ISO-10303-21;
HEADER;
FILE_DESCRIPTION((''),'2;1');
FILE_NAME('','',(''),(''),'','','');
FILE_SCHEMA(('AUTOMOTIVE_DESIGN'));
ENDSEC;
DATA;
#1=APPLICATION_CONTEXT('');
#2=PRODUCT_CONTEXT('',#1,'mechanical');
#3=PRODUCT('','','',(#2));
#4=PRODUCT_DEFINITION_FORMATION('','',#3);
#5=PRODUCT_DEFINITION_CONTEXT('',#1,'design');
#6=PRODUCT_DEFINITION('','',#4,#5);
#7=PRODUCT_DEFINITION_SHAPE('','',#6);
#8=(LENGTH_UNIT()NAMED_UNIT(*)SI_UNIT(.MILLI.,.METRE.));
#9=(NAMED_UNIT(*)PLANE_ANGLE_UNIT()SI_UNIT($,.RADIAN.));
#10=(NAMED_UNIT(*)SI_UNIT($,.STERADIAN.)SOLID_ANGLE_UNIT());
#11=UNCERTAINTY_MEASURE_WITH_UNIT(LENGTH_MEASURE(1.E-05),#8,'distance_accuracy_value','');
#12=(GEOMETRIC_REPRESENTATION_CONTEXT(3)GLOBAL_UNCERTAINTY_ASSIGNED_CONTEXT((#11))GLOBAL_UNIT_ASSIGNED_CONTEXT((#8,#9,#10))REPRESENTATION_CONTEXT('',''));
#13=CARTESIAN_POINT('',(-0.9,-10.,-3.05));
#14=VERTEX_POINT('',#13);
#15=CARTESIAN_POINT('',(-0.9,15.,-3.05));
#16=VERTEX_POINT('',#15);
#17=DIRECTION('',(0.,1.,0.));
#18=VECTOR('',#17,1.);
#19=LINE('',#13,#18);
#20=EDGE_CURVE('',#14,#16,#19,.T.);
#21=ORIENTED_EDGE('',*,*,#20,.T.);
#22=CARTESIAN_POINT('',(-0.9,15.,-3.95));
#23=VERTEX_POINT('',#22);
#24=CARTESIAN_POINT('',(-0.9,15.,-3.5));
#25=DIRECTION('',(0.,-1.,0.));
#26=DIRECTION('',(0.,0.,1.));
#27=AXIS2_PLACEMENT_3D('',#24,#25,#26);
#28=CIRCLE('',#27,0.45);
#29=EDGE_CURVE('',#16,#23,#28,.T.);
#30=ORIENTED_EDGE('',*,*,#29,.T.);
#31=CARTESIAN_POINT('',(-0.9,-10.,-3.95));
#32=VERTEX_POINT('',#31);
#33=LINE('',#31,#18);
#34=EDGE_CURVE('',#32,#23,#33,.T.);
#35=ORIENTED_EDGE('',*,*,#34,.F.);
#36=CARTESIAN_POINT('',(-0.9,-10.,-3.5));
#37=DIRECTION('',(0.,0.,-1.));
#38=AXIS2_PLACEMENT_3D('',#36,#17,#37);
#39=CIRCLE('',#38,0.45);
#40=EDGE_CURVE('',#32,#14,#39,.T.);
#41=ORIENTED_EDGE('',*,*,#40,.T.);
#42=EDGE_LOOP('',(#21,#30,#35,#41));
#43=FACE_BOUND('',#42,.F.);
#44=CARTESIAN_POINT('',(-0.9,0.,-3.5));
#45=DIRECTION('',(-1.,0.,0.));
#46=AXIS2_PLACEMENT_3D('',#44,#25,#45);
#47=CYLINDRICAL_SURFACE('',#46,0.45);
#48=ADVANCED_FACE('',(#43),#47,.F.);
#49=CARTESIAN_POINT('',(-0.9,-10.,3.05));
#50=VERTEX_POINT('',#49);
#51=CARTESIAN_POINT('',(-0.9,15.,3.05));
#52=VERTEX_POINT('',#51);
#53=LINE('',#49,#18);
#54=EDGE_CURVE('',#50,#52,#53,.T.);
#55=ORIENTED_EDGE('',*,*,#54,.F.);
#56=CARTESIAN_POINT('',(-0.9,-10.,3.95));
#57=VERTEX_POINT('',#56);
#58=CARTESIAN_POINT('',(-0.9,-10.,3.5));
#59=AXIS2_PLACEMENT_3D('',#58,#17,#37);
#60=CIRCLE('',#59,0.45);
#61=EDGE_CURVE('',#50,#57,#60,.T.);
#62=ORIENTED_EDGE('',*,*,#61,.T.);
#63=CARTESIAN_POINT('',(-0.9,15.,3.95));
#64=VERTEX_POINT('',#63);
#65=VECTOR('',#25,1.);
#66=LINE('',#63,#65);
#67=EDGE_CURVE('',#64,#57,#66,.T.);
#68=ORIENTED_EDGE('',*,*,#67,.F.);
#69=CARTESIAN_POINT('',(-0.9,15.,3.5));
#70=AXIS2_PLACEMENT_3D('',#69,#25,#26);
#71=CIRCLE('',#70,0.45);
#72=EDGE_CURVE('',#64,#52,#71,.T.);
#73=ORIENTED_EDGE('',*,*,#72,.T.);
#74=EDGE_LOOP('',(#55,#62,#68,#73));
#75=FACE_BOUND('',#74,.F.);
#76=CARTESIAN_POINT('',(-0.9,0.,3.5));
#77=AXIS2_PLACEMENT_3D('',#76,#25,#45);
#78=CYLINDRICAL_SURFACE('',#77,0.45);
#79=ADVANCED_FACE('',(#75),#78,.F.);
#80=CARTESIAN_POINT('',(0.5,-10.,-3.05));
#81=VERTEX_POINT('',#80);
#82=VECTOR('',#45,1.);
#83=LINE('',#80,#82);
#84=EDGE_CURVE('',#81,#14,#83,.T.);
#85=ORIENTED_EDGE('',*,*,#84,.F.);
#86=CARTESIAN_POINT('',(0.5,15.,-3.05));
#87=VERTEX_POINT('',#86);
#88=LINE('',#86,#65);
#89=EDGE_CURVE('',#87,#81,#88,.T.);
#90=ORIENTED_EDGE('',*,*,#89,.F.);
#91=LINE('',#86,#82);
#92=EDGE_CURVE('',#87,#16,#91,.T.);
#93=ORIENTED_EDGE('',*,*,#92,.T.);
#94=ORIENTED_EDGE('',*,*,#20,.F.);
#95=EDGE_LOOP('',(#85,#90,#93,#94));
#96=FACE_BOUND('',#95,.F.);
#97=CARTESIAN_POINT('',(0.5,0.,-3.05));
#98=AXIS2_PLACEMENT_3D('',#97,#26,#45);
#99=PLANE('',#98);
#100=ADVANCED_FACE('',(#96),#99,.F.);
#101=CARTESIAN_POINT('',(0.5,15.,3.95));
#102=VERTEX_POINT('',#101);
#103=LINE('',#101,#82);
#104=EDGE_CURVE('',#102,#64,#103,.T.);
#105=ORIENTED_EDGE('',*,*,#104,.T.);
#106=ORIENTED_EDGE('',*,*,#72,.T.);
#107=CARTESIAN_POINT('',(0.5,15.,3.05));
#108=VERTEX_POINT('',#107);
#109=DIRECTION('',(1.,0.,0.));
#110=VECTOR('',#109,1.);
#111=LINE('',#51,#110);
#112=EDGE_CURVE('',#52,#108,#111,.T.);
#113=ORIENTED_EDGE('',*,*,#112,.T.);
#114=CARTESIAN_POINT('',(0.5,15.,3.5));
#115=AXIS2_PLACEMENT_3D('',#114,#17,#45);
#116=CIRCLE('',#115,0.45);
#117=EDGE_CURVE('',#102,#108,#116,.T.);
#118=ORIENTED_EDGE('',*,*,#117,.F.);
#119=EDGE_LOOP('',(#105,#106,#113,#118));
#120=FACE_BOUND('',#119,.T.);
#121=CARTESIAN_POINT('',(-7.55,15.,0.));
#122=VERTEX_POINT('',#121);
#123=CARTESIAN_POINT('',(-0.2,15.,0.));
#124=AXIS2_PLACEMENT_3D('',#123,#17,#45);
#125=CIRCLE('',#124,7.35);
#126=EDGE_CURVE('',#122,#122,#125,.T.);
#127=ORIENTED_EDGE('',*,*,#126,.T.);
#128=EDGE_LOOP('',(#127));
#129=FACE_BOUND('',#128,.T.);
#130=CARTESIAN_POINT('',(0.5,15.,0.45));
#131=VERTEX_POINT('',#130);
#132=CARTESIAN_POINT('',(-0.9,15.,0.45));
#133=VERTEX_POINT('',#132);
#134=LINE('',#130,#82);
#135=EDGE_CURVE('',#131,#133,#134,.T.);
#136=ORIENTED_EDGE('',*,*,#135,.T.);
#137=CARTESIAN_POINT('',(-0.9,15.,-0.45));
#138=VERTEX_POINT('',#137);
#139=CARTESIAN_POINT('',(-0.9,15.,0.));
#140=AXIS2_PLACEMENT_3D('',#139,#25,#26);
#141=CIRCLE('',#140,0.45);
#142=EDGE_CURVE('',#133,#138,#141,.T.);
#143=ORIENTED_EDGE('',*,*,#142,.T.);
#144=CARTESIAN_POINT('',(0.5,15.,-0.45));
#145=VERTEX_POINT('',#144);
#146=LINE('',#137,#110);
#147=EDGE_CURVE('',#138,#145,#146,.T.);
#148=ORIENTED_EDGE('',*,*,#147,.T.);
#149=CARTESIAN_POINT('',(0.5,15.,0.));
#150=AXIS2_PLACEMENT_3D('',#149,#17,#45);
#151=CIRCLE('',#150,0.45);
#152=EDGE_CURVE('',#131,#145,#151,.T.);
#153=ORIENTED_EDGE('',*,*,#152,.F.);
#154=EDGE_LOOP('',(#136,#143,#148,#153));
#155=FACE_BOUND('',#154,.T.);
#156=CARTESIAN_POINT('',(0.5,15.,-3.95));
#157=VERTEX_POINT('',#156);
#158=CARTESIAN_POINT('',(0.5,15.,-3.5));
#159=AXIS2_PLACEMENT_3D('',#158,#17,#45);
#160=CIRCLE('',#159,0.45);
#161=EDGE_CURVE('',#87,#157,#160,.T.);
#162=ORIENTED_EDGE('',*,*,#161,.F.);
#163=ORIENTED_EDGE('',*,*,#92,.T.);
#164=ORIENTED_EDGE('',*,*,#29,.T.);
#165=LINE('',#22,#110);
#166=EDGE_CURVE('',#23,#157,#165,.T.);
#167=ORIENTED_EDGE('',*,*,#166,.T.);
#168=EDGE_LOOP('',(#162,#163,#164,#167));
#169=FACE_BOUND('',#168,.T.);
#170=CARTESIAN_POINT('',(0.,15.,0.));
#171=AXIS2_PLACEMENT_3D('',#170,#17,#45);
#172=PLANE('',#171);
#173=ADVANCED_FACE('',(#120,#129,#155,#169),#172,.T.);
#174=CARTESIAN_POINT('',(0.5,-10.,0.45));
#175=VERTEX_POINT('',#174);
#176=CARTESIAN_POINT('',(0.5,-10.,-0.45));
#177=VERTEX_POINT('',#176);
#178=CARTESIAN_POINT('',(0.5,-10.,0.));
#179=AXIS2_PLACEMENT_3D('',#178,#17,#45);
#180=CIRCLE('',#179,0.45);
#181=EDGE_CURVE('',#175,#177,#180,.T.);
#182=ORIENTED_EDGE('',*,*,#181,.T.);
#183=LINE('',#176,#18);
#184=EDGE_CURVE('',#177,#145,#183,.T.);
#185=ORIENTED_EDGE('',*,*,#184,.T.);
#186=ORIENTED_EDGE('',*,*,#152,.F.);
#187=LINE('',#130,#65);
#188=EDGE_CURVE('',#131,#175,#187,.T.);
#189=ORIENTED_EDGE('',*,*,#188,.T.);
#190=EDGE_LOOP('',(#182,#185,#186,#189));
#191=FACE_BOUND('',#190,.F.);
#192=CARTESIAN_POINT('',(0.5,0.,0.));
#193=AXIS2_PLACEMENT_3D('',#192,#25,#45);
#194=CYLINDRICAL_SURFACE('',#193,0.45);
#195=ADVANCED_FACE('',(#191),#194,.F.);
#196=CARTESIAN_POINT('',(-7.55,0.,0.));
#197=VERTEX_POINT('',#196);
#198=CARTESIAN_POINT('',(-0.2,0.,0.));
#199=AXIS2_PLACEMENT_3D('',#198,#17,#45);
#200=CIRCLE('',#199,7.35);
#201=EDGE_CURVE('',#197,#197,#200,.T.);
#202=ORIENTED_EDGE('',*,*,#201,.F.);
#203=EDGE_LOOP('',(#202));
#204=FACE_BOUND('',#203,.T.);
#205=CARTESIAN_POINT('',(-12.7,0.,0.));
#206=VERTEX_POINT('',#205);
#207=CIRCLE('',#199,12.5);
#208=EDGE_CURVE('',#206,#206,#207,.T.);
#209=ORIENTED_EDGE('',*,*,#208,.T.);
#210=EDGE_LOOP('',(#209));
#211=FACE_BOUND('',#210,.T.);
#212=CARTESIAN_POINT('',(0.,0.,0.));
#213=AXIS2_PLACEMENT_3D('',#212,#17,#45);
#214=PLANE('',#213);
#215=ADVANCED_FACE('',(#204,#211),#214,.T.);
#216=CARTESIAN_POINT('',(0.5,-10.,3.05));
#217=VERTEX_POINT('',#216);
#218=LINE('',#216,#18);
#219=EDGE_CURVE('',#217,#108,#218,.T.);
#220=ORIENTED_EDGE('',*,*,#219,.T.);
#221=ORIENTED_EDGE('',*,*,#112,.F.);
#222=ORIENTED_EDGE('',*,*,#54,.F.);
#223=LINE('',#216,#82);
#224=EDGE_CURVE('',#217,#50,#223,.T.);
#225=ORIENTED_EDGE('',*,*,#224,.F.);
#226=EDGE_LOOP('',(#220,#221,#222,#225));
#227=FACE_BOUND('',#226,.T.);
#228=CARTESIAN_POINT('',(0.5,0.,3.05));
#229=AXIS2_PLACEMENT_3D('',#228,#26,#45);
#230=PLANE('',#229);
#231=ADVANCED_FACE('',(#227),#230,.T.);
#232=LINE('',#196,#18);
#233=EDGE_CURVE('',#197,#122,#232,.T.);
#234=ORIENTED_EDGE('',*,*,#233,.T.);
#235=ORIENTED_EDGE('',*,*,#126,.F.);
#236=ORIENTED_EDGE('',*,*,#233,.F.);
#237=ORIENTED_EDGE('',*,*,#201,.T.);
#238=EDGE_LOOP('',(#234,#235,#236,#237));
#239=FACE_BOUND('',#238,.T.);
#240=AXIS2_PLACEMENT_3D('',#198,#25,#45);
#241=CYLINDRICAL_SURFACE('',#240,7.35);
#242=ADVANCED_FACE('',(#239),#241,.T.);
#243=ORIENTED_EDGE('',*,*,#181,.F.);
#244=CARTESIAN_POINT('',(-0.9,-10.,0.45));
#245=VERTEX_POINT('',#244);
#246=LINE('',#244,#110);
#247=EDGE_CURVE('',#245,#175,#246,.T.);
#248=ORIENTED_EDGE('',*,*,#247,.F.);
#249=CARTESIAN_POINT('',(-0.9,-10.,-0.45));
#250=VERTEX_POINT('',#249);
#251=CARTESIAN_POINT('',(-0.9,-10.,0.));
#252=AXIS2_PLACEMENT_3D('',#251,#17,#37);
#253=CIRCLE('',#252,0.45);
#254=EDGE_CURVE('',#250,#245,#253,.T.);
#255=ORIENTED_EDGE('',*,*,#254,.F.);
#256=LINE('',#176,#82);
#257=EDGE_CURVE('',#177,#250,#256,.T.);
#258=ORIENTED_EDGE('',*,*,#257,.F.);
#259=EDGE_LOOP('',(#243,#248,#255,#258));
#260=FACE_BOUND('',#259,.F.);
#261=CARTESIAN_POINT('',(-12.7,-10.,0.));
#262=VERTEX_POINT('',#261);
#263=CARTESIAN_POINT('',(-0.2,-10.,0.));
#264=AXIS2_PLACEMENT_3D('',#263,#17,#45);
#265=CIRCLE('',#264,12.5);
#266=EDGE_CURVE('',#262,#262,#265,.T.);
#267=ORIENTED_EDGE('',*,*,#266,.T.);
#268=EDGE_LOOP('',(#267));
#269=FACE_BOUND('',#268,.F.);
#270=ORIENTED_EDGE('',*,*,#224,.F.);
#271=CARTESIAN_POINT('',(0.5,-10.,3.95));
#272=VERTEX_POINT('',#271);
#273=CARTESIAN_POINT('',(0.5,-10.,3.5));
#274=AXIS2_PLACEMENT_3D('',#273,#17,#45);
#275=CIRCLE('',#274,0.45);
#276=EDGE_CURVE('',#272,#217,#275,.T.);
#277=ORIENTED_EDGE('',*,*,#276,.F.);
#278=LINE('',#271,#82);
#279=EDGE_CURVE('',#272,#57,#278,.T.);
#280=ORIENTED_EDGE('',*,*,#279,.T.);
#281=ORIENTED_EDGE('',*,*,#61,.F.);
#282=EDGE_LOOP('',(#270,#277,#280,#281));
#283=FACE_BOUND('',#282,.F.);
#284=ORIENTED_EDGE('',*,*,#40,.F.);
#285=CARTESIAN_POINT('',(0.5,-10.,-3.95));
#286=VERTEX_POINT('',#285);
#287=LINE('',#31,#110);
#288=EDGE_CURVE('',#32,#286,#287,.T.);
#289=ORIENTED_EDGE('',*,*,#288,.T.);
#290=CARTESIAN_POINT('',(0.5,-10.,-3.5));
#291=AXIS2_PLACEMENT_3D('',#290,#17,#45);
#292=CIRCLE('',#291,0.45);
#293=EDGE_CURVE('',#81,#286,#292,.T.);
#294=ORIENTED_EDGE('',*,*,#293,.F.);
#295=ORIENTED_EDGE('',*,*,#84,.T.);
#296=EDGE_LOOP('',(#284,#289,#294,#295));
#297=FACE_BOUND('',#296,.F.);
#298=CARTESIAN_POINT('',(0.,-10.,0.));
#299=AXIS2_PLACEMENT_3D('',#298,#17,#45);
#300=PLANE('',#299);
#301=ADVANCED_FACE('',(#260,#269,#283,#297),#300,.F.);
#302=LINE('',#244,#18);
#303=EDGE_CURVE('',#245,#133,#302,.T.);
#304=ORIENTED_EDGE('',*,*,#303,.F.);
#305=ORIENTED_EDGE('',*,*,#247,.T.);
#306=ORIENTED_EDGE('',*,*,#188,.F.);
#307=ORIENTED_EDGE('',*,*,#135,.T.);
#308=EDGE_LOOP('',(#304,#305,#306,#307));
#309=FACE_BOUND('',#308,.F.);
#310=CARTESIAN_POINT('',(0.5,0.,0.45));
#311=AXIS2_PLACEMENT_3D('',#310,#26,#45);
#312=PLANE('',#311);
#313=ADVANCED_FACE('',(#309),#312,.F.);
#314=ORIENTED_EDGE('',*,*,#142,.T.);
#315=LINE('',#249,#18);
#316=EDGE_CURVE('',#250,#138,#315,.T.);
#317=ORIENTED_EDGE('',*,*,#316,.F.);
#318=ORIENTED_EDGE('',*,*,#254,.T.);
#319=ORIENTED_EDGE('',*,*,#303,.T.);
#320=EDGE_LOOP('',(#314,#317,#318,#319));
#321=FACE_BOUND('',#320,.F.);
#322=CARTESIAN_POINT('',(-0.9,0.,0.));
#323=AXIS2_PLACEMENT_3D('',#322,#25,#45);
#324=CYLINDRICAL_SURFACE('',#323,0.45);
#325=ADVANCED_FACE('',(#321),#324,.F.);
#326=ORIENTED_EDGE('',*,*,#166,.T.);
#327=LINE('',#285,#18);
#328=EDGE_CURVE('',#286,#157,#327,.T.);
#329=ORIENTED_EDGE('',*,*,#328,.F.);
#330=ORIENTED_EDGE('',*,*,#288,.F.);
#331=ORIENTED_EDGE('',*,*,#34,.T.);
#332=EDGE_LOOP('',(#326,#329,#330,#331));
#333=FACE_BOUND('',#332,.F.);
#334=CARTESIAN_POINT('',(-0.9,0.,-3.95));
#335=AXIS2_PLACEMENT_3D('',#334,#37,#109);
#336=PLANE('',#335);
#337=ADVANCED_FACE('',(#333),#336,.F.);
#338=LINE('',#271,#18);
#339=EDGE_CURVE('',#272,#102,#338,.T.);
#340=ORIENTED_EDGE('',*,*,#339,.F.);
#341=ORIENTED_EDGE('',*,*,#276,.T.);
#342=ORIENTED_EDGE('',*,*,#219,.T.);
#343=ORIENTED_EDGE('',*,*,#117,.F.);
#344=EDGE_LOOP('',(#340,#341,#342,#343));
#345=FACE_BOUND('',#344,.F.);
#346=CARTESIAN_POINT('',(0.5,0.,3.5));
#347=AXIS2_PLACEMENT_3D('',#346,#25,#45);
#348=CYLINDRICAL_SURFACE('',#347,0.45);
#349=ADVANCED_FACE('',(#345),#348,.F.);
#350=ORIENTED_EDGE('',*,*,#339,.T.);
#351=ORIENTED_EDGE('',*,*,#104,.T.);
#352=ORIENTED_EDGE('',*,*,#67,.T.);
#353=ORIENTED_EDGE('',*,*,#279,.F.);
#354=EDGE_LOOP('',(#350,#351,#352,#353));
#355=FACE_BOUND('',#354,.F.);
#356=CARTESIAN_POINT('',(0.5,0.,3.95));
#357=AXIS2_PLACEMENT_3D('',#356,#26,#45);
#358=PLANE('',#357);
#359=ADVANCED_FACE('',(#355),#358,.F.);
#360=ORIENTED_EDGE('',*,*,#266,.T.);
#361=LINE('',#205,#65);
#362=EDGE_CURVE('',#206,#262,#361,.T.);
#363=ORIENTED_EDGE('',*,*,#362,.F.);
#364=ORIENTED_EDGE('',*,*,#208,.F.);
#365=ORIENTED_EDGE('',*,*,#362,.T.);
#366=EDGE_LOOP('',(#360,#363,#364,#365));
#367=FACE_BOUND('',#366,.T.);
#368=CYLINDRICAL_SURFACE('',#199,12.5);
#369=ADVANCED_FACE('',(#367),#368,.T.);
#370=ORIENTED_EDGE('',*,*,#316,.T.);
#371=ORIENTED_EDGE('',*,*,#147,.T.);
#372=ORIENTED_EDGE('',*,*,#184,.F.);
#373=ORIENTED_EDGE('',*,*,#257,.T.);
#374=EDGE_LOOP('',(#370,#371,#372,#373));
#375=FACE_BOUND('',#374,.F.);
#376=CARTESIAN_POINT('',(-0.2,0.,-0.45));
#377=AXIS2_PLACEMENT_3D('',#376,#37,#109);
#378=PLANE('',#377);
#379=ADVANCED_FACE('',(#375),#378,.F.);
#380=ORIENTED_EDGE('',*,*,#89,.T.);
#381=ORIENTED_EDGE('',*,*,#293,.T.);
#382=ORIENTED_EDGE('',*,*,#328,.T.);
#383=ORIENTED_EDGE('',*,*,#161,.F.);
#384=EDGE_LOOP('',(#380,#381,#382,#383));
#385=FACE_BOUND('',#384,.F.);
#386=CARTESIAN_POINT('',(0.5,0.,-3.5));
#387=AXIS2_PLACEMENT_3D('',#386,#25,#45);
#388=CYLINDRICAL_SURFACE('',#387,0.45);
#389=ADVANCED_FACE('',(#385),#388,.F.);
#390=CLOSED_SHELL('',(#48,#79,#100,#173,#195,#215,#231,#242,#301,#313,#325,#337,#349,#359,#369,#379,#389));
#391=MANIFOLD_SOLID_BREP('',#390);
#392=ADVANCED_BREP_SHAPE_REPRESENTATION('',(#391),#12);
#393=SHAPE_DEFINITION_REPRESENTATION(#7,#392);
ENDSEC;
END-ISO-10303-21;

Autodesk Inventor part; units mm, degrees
ref_plane "YZ Plane" through (0, 0, 0) normal (1, 0, 0) x (0, 1, 0)
ref_plane "XZ Plane" through (0, 0, 0) normal (0, 1, 0) x (-1, 0, 0)
ref_plane "XY Plane" through (0, 0, 0) normal (0, 0, 1) x (1, 0, 0)
sketch "Sketch1" plane through (0, 0, 0) normal (0, 1, 0) x (-1, 0, 0)
  circle A0 centre (0.2, 0) radius 7.35
  circle A1 centre (0.2, 0) radius 12.5
  line L0 (0.2, 0) -> (0.2, -3.5)
  line L1 (0.2, 0) -> (0.2, 3.5)
  line L2 (0.2, 3.5) -> (-0.5, 3.5)
  line L3 (-0.5, 3.5) -> (0.9, 3.5)
  line L4 (0.2, 0) -> (-0.5, 0)
  line L5 (-0.5, 0) -> (0.9, 0)
  line L6 (0.2, -3.5) -> (-0.5, -3.5)
  line L7 (-0.5, -3.5) -> (0.9, -3.5)
  circle A2 centre (-0.5, -3.5) radius 0.45
  circle A3 centre (0.9, -3.5) radius 0.45
  circle A4 centre (-0.5, 0) radius 0.45
  circle A5 centre (0.9, 0) radius 0.45
  circle A6 centre (-0.5, 3.5) radius 0.45
  circle A7 centre (0.9, 3.5) radius 0.45
  line L8 (0.9, -3.95) -> (-0.5, -3.95)
  line L9 (-0.5, -3.05) -> (0.9, -3.05)
  line L10 (0.9, -0.45) -> (-0.5, -0.45)
  line L11 (-0.5, 0.45) -> (0.9, 0.45)
  line L12 (-0.5, 3.05) -> (0.9, 3.05)
  line L13 (-0.5, 3.95) -> (0.9, 3.95)
  line L14 (1.35, 3.5) -> (1.35, -3.5)
  dimension "d0" = 14.7
  dimension "d1" = 25
  dimension "d14" = 3.5
  dimension "d15" = 3.5
  dimension "d16" = 0.7
  dimension "d17" = 1.4
  dimension "d18" = 0.7
  dimension "d19" = 1.4
  dimension "d20" = 0.7
  dimension "d21" = 1.4
  dimension "d22" = 0.9
  dimension "d23" = 0.9
  dimension "d24" = 0.9
  dimension "d25" = 0.9
  dimension "d26" = 0.9
  dimension "d27" = 0.9
extrude "Extrusion1" add sketch "Sketch1" along normal blind 15 contours A0 | L10 A5 L14 A3 L9 L0 | L1 L12 A7 L14 A5 L11
extrude "Extrusion2" add sketch "Sketch1" against normal blind 10 contours A0 | A1 | L10 A5 L14 A3 L9 L0 | L1 L12 A7 L14 A5 L11
properties part number "Kabelstopfen_Hinten_next try"
